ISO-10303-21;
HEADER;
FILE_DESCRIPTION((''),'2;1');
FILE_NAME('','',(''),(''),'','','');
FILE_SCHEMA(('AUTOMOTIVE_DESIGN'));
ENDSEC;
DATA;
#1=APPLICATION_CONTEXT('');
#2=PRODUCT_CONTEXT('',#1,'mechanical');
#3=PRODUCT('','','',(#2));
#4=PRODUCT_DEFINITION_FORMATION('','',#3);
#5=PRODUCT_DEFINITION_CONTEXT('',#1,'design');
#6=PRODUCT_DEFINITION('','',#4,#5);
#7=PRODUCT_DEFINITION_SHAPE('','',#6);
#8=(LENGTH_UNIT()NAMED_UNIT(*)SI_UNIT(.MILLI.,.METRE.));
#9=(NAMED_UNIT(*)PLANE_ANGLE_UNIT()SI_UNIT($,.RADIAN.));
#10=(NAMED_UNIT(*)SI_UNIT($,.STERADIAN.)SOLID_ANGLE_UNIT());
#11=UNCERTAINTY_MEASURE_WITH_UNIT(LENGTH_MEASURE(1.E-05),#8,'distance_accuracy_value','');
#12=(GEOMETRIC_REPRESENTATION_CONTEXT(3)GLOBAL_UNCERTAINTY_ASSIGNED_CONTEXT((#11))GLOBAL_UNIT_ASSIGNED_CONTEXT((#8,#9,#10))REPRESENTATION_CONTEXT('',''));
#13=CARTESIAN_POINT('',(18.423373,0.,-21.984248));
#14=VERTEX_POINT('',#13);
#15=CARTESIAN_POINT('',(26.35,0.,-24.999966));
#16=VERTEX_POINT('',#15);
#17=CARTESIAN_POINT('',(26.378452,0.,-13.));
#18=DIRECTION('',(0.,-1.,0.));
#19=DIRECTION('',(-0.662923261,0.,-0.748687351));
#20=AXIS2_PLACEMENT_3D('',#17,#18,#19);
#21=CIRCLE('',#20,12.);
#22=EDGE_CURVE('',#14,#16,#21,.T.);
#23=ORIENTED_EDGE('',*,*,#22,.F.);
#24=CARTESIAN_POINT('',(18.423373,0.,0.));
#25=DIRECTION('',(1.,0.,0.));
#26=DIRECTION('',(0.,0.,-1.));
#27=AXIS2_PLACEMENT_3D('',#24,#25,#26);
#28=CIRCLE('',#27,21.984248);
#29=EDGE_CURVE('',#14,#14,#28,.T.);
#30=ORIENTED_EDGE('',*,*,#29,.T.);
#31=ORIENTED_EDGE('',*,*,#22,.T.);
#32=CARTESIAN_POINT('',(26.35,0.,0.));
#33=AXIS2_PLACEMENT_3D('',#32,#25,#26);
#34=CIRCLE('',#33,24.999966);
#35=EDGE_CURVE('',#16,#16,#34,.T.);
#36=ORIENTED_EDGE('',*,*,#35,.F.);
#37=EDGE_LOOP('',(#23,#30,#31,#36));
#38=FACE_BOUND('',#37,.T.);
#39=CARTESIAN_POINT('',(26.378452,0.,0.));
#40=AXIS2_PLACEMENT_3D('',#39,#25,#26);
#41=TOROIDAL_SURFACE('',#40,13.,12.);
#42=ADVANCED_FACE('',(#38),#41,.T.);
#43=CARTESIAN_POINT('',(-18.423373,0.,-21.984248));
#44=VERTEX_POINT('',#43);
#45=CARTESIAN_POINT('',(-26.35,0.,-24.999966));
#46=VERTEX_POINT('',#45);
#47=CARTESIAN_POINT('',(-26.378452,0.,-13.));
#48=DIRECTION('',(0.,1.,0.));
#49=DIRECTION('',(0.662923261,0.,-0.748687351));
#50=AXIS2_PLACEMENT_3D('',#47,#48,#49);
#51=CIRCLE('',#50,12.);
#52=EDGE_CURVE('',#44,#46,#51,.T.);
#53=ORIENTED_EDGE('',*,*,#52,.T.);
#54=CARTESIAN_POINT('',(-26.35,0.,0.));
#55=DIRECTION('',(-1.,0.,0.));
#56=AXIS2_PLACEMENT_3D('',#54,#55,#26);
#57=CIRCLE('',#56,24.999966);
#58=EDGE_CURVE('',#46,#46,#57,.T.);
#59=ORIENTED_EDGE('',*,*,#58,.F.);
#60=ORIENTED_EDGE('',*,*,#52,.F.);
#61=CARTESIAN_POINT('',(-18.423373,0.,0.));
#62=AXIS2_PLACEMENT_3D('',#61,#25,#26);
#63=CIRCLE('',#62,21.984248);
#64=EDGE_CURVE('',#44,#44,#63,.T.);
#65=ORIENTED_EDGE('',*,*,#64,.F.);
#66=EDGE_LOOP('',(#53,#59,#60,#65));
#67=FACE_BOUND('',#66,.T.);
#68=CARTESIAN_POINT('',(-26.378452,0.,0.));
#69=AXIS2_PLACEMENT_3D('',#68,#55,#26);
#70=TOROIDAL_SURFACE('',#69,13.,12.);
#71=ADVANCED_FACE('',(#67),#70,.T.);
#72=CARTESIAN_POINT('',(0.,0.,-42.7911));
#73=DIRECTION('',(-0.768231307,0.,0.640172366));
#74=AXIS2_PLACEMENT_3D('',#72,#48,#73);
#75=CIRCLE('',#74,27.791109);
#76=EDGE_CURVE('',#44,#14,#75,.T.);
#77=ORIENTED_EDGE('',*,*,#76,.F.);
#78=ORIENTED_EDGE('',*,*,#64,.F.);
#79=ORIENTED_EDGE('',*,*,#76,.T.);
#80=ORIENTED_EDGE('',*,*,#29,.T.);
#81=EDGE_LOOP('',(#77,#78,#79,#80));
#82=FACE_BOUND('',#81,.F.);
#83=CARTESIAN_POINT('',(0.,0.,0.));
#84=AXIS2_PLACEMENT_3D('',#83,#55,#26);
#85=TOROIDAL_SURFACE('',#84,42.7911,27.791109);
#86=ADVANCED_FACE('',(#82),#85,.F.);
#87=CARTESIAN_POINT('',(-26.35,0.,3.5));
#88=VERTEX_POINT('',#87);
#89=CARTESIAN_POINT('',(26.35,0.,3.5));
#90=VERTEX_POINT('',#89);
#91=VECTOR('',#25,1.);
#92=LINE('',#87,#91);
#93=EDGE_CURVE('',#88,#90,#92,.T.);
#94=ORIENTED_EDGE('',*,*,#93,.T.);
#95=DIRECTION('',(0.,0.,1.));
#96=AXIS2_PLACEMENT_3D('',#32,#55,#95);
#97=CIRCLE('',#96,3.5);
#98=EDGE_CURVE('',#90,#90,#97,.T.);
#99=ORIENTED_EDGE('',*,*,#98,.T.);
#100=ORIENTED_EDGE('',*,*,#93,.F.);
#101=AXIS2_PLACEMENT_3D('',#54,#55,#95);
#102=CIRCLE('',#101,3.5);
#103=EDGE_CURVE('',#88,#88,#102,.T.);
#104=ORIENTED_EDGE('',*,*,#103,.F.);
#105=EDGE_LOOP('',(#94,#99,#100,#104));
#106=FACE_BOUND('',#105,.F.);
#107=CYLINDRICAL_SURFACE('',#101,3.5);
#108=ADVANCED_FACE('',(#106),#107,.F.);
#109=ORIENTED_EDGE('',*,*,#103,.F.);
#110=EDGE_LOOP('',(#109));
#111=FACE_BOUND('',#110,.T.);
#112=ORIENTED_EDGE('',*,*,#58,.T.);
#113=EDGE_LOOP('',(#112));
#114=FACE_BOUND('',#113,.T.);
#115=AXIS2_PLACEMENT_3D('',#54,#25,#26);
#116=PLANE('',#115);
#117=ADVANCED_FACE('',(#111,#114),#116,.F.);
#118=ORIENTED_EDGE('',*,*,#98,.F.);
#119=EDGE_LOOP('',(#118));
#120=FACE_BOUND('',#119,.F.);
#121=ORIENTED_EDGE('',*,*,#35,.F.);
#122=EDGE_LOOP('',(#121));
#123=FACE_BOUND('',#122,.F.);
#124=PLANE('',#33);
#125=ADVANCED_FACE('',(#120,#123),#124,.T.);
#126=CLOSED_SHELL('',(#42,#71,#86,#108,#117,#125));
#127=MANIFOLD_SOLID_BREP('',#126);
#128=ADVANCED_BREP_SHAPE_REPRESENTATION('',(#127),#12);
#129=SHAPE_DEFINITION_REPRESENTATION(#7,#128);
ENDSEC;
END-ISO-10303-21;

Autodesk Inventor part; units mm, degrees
ref_plane "YZ Plane" through (0, 0, 0) normal (1, 0, 0) x (0, 1, 0)
ref_plane "XZ Plane" through (0, 0, 0) normal (0, 1, 0) x (-1, 0, 0)
ref_plane "XY Plane" through (0, 0, 0) normal (0, 0, 1) x (1, 0, 0)
sketch "Sketch1" plane through (0, 0, 0) normal (0, 1, 0) x (-1, 0, 0)
  line L0 (21.35, -25) -> (26.35, -25)
  line L1 (-21.35, -25) -> (-26.35, -25)
  arc A0 (21.35, -25) -> (-21.35, -25) centre (0, -42.7911) ccw
  line L2 (26.35, 0) -> (-26.35, 0)
  line L3 (-26.35, 0) -> (-26.35, -25)
  line L4 (26.35, 0) -> (26.35, -25)
  point P0 (0, 0)
  dimension "d2" = 5
  dimension "d4" = 5
revolve "Revolution1" add sketch "Sketch1" angle 360 about axis through (-26.35, 0, 0) along (1, 0, 0)
sketch "Sketch2" plane through (-26.35, 0, 0) normal (-1, 0, 0) x (0, 0, 1)
  circle A0 centre (0, 0) radius 25 projected
  circle A1 centre (0, 0) radius 3.5
  dimension "d8" = 7
extrude "Extrusion1" cut sketch "Sketch2" against normal blind 52.7 contours A1
fillet "Fillet2" radius 12 2 edges at (-21.35, 0, 25) (21.35, 0, 25)
properties part number "vystuha_hridel_nahore"
